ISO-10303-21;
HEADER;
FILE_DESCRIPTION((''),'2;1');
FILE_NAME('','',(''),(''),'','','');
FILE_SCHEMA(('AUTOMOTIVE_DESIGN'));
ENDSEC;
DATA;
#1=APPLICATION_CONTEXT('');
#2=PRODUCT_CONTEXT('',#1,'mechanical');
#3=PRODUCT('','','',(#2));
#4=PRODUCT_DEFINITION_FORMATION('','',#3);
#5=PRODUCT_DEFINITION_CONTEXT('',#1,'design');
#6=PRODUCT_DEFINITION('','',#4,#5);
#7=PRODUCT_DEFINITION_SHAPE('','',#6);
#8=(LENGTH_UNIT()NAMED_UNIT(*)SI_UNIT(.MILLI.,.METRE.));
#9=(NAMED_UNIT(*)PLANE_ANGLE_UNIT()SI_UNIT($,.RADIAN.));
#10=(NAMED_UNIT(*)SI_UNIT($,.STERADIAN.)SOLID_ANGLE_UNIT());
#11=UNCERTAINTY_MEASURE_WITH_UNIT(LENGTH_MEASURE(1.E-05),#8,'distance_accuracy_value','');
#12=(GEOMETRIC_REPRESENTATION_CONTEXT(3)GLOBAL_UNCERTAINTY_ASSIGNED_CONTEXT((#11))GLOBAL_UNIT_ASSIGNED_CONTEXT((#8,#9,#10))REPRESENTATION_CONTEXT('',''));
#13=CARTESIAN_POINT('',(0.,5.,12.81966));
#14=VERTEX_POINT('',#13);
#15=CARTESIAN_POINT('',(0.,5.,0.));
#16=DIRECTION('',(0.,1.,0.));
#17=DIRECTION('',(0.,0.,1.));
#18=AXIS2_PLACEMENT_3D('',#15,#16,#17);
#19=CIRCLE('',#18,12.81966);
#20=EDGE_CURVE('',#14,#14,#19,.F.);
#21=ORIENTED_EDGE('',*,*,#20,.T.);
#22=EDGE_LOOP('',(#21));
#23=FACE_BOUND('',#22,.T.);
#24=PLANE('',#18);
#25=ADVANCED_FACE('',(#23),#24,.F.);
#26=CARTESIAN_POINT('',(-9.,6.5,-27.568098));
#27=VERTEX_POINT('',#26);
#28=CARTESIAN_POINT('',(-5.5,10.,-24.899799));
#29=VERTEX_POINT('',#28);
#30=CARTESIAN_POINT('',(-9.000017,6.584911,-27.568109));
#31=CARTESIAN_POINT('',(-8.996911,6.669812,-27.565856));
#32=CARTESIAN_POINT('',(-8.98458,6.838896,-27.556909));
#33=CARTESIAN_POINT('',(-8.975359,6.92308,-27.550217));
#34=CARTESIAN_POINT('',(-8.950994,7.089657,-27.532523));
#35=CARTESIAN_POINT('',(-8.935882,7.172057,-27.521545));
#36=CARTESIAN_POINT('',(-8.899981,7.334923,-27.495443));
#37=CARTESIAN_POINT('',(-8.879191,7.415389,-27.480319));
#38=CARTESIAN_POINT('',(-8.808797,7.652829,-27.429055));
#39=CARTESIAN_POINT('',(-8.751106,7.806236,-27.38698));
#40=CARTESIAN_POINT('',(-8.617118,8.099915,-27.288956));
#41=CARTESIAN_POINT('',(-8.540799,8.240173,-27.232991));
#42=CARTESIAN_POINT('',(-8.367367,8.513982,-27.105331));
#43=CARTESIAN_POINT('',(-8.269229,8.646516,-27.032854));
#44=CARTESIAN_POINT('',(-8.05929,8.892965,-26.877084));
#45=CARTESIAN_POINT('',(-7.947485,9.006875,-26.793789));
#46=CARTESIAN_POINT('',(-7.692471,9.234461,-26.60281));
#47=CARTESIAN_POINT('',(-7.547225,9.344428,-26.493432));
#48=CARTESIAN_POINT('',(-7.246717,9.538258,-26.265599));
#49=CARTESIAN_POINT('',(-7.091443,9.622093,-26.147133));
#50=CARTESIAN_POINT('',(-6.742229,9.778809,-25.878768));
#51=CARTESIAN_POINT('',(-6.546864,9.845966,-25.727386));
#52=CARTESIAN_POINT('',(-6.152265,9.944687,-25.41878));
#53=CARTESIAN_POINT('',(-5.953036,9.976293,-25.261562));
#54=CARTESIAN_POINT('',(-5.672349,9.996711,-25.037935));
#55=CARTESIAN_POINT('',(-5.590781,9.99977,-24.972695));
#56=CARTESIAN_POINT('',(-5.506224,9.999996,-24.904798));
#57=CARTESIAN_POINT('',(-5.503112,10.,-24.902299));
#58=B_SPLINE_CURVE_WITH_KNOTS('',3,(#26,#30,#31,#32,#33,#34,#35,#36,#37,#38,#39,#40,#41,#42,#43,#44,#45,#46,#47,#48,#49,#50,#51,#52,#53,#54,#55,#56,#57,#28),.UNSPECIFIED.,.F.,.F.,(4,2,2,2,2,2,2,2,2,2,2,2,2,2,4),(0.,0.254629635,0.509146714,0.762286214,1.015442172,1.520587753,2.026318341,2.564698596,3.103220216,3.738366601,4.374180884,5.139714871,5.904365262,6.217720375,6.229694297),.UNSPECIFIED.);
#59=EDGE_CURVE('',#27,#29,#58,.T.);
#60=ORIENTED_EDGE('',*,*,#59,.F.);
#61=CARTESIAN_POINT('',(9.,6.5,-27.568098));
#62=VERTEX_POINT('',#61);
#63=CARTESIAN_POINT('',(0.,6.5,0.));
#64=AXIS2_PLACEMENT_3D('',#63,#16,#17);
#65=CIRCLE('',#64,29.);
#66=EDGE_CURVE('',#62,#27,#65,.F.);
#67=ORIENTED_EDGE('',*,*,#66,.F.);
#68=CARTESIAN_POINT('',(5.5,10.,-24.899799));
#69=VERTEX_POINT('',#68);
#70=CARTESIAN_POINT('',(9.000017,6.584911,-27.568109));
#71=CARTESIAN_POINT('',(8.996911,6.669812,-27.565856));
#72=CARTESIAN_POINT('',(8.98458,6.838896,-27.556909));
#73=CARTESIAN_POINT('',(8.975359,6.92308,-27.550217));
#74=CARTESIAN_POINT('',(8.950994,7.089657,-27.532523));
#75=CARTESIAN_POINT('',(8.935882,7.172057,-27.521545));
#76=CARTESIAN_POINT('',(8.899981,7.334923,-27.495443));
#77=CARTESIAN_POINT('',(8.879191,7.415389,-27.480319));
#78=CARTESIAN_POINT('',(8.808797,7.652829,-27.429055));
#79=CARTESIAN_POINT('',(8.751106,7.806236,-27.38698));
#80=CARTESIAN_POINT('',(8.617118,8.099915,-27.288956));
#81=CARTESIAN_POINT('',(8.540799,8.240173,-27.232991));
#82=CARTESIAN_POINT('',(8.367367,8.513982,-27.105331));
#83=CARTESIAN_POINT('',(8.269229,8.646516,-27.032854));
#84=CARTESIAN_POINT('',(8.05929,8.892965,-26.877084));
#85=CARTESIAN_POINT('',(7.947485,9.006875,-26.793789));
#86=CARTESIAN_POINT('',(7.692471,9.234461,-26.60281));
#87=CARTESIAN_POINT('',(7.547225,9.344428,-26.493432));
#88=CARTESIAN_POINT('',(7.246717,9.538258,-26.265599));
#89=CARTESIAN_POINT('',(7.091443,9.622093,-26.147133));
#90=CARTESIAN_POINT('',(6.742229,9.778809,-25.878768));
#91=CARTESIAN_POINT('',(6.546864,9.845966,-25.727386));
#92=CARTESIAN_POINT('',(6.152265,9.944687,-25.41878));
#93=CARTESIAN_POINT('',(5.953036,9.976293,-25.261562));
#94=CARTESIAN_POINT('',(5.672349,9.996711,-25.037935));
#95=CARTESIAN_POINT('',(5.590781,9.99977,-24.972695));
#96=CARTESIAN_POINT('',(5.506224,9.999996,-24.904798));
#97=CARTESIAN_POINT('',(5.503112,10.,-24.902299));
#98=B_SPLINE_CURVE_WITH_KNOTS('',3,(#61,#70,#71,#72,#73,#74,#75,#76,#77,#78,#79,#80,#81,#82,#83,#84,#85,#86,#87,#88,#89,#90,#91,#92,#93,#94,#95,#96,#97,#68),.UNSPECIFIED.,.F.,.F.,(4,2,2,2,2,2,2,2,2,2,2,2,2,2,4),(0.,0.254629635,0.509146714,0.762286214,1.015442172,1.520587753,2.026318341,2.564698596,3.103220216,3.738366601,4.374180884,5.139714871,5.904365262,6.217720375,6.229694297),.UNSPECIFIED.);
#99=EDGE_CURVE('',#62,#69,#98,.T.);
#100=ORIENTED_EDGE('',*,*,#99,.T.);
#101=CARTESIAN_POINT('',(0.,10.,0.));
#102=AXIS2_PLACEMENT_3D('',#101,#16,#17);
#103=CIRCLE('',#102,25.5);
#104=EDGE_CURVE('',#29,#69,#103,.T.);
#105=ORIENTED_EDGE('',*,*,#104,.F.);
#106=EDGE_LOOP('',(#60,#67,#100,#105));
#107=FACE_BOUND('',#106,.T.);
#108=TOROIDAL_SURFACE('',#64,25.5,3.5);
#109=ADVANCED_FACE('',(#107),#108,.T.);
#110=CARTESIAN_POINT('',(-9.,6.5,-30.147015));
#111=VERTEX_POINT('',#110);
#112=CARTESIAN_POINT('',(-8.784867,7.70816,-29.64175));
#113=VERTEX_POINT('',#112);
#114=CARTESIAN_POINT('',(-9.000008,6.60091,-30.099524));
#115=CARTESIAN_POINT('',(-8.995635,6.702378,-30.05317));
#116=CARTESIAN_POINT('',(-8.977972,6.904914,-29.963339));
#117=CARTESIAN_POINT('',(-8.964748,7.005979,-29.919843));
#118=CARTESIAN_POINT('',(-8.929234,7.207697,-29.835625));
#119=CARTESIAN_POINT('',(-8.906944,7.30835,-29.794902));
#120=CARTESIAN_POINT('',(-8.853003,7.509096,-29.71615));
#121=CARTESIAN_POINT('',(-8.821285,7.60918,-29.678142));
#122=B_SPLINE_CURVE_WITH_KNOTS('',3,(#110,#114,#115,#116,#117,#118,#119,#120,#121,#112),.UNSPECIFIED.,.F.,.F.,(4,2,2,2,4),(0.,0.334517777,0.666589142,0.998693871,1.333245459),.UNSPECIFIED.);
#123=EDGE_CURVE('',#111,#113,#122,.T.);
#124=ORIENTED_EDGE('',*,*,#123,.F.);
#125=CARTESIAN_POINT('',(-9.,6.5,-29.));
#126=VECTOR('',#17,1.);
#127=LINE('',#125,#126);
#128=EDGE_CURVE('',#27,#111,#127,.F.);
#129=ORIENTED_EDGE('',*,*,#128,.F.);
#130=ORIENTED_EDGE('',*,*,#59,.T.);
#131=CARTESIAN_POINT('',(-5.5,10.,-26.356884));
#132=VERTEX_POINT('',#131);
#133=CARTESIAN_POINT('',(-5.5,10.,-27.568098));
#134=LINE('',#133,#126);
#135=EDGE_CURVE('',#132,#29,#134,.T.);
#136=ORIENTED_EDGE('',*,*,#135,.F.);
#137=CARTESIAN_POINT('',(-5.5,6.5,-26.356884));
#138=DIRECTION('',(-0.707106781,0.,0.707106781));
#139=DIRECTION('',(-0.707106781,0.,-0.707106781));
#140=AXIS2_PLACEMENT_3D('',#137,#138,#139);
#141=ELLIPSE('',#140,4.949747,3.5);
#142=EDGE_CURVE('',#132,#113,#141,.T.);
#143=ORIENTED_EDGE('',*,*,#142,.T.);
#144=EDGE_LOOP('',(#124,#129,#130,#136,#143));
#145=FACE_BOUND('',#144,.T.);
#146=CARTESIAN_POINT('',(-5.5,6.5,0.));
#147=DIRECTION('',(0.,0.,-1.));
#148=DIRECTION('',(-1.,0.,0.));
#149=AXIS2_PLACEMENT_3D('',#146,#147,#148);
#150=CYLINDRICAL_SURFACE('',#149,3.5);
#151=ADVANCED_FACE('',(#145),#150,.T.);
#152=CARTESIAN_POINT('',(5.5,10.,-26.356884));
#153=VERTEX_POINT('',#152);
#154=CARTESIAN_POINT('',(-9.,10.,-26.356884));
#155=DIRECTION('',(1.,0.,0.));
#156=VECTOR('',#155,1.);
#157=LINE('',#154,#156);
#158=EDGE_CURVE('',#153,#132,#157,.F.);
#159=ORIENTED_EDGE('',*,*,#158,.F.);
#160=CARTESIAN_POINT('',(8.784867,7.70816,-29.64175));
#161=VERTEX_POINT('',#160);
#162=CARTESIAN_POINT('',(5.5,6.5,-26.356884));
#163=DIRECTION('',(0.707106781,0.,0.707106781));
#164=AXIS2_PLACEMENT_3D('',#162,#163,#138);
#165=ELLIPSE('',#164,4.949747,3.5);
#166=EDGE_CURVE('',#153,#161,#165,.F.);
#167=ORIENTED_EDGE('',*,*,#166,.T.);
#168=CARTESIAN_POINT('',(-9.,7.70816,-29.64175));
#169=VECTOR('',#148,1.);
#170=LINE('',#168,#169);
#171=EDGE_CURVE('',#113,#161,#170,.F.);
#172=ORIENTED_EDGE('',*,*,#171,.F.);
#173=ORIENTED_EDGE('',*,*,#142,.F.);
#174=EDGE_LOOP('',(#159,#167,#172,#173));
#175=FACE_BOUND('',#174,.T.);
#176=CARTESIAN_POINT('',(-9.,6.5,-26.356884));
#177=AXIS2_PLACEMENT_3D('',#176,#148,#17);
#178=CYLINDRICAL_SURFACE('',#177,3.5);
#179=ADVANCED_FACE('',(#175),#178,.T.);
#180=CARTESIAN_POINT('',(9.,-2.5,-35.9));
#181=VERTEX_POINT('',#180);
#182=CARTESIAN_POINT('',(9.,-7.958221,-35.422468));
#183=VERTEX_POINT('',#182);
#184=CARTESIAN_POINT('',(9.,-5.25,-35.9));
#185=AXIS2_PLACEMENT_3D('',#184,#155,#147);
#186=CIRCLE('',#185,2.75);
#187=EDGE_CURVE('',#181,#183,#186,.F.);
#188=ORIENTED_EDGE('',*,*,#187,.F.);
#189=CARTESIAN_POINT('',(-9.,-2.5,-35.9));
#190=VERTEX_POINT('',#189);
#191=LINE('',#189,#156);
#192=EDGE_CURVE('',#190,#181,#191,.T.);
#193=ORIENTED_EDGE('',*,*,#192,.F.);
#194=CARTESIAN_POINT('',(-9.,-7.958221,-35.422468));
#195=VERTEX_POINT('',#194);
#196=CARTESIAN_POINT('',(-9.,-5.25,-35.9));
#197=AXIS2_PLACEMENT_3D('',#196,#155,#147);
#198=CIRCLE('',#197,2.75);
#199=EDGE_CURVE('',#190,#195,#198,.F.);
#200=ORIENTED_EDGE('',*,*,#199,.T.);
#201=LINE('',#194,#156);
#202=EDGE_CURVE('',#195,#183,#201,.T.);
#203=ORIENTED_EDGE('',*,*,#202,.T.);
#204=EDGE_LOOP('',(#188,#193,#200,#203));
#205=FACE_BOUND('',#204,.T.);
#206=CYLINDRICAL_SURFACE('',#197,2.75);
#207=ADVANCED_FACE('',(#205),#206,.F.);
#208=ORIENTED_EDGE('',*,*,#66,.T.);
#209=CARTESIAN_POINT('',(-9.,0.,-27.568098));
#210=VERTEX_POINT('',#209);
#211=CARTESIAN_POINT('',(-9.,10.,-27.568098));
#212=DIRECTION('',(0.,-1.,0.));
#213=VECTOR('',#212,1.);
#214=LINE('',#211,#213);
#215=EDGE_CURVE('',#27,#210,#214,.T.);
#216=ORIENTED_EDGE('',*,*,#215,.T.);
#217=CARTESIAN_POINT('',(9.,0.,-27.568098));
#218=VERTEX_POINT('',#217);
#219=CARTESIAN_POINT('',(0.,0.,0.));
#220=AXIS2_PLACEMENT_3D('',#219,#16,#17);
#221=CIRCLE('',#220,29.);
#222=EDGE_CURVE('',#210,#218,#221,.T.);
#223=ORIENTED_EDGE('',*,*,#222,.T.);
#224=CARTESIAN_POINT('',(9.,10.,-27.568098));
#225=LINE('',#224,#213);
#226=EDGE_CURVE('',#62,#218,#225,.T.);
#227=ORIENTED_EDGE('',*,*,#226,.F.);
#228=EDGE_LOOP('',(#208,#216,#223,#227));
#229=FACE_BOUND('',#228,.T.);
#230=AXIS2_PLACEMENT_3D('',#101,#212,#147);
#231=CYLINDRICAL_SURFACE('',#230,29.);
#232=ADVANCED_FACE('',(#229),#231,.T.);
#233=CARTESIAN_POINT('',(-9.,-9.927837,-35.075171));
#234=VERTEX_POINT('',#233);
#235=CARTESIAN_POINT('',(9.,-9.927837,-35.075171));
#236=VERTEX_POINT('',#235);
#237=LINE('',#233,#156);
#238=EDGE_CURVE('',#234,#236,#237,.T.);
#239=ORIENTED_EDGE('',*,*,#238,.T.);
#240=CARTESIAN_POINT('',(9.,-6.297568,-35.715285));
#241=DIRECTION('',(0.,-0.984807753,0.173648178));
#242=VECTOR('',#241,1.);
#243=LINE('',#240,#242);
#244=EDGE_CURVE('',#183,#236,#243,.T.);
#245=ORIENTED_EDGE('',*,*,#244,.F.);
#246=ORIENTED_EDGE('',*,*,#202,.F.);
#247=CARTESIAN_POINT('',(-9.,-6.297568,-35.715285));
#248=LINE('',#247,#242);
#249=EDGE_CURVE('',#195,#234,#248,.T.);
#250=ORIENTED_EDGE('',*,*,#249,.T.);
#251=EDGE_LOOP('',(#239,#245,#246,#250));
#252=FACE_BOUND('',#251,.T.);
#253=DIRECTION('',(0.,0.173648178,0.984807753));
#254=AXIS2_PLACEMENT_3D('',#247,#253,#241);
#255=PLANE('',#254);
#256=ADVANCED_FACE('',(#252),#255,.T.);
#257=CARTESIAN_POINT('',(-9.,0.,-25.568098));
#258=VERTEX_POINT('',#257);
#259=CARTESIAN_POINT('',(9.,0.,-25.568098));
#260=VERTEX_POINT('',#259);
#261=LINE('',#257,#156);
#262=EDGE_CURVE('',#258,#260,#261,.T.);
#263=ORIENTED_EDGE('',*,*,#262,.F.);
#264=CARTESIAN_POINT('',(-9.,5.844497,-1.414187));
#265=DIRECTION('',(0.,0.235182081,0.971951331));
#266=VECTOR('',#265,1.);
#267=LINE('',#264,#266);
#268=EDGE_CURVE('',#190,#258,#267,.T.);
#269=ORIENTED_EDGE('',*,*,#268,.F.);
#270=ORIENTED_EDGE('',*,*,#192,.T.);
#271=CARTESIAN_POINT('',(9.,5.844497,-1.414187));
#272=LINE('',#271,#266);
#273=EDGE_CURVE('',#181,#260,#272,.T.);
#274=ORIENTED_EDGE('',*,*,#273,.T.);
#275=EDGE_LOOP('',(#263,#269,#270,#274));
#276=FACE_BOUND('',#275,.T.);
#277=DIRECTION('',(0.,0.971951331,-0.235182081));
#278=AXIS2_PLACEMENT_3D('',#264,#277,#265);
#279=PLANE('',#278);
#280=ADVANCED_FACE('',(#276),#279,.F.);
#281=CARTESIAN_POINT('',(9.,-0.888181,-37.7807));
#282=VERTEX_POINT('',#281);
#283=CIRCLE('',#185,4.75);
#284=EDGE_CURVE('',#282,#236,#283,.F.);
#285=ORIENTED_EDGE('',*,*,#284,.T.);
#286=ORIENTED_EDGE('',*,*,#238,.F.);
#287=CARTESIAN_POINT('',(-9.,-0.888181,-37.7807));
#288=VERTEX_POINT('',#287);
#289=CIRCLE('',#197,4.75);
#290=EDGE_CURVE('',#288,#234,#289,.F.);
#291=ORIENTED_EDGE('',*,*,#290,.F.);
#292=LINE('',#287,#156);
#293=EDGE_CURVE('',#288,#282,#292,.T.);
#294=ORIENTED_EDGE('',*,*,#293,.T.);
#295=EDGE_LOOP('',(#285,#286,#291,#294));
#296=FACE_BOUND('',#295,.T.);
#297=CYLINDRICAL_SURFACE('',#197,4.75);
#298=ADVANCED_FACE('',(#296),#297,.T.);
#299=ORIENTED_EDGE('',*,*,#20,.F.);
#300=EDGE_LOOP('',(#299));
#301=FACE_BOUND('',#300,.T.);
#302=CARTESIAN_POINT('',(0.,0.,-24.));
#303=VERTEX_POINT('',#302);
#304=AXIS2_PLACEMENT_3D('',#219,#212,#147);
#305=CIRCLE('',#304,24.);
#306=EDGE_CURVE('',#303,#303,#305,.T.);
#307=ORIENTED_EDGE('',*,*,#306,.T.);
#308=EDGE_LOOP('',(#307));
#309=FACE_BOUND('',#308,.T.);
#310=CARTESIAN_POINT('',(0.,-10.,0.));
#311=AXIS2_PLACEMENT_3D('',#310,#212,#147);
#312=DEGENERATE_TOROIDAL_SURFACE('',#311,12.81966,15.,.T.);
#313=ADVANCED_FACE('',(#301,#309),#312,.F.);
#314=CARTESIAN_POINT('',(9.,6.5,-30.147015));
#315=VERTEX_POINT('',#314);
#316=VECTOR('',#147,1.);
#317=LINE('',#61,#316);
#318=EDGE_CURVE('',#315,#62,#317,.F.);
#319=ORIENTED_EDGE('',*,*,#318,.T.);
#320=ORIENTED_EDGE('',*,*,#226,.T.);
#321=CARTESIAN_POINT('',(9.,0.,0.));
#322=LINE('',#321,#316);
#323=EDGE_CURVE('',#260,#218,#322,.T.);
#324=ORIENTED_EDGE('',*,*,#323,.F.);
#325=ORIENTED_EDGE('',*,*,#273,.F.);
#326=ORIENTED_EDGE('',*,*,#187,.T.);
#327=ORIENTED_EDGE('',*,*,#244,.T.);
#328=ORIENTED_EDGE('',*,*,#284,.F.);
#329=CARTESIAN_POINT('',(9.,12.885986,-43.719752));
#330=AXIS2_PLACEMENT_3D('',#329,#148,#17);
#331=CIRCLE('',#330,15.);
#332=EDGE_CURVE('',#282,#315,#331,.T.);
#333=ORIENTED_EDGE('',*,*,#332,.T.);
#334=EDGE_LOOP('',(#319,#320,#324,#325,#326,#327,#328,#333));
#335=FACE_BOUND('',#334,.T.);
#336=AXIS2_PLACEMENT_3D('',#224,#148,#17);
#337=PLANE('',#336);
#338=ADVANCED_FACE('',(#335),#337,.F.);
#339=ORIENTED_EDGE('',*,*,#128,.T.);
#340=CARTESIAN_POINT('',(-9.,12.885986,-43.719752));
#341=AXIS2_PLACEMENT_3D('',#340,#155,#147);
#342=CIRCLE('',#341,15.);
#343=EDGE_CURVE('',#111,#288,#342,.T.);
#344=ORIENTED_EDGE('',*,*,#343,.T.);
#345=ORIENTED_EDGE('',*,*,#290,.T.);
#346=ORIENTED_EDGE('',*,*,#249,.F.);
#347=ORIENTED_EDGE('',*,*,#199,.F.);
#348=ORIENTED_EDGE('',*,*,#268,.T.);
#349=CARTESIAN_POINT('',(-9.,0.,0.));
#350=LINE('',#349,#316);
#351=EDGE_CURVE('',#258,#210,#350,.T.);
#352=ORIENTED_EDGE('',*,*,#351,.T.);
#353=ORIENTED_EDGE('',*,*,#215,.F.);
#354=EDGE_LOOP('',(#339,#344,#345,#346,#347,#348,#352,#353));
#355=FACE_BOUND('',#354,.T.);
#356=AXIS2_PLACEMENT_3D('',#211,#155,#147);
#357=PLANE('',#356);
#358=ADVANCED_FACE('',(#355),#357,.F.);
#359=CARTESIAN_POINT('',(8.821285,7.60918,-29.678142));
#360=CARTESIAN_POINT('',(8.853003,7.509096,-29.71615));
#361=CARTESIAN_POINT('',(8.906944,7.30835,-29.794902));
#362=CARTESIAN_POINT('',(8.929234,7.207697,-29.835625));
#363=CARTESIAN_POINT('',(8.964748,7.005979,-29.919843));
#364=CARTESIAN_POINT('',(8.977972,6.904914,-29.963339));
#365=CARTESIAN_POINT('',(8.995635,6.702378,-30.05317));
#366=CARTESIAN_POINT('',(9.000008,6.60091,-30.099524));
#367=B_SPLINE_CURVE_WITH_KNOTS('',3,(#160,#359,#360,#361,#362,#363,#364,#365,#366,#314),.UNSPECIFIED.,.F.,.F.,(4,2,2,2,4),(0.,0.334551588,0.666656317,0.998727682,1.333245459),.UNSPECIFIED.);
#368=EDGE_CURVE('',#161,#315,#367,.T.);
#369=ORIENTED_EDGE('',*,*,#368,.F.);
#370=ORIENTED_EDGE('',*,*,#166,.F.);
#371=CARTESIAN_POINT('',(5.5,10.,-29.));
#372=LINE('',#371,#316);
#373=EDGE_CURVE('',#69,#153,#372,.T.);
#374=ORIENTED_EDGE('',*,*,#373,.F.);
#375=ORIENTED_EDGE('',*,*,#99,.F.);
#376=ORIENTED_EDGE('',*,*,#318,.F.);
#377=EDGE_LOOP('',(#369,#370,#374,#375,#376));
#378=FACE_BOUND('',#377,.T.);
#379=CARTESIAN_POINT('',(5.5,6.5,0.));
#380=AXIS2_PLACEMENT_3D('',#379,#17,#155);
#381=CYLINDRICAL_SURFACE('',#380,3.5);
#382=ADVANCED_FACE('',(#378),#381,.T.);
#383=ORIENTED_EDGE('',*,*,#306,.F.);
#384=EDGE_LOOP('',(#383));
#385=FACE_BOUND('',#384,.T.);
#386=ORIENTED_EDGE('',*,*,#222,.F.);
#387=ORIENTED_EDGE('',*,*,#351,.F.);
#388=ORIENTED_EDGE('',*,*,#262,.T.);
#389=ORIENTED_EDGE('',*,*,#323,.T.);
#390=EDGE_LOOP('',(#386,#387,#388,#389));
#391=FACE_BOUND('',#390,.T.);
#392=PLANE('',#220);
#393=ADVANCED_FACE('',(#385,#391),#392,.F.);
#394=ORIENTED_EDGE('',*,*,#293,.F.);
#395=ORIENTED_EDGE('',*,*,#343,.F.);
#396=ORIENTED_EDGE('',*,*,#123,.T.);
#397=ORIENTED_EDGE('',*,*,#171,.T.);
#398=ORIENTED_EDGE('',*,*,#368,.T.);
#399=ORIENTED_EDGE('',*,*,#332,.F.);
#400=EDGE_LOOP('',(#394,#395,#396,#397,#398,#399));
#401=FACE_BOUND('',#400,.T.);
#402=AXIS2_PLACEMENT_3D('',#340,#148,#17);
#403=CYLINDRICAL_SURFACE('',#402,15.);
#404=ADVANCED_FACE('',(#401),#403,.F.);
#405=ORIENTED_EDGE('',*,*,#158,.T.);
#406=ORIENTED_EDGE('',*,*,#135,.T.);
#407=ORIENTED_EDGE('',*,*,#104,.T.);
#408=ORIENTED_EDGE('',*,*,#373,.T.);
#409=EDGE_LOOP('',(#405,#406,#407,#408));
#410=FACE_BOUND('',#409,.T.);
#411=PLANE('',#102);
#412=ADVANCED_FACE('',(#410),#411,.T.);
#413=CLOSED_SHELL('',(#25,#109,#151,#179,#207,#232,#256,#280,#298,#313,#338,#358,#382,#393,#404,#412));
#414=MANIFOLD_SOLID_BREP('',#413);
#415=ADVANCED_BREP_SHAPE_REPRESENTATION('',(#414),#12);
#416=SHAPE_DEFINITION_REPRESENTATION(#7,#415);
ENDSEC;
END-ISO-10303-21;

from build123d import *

# Parameters (mm, degrees)
BOSS_EXTRUDE1_DEPTH = 10
BOSS_EXTRUDE2_DEPTH = 18
FILLET3_R           = 15
FILLET4_R           = 3.5
SKETCH13_R          = 24
CUT_EXTRUDE1_DEPTH  = 5
FILLET6_R           = 15


with BuildPart() as part:
    # Sketch1 → Boss-Extrude1 (new body)
    with BuildSketch(Plane(origin=(0, 0, 0), x_dir=(1, 0, 0), z_dir=(0, 1, 0))):
        with BuildLine():
            Line((-9, 27.568097504), (-9, 29))
            Line((-9, 29), (9, 29))
            Line((9, 29), (9, 27.568097504))
            ThreePointArc((9, 27.568097504), (0, -29), (-9, 27.568097504))
        make_face()
    extrude(amount=BOSS_EXTRUDE1_DEPTH)

    # Sketch2 → Boss-Extrude2 (add)
    with BuildSketch(Plane(origin=(9, 0, 0), x_dir=(0, 0, -1), z_dir=(1, 0, 0))):
        with BuildLine():
            ThreePointArc((35.9, -2.5), (38.63953542, -5.489678293), (35.422467511, -7.958221321))
            Line((35.422467511, -7.958221321), (35.075171156, -9.927836827))
            ThreePointArc((35.075171156, -9.927836827), (40.631924816, -5.663989778), (35.9, -0.5))
            Line((35.9, -0.5), (29, -0.5))
            Line((29, -0.5), (29, 0))
            Line((29, 0), (27.568097504, 0))
            Line((27.568097504, 0), (25.568097504, 0))
            Line((25.568097504, 0), (35.9, -2.5))
        make_face()
    extrude(amount=-BOSS_EXTRUDE2_DEPTH)

    # Fillet3
    # the kernel refuses this fillet: 15 mm, written as the material it adds along each edge
    with BuildSketch(Plane(origin=(9, -0.5, -29), x_dir=(0, -0.04416525302112601, -0.9990242391581797), z_dir=(-1, 0, 0))) as fillet3_piece_1_section:
        with BuildLine():
            CenterArc((14.114193119, -14.023025969), FILLET3_R, 110.793105877, 55.582764188)
            Line((-0.463735157, -10.489754511), (-1.921527984, -10.136427365))
            ThreePointArc((-1.921527984, -10.136427365), (-1.730403937, -5.178629376), (-1.498536359, 0.06624788))
            Line((-1.498536359, 0.06624788), (0.06624788, 1.498536359))
            ThreePointArc((0.06624788, 1.498536359), (6.95951513, 1.193796113), (8.256784252, 1.402302597))
            Line((8.256784252, 1.402302597), (8.789275967, 0))
        make_face()
    fillet3_piece_1 = extrude(amount=18, mode=Mode.PRIVATE)
    fillet3_piece_1 = split(fillet3_piece_1, bisect_by=Plane(origin=(0, -2.614058352, -36.371375907), z_dir=(0, 0.9719513305344294, -0.23518208067867855)), keep=Keep.TOP, mode=Mode.PRIVATE)
    add(fillet3_piece_1)

    # Fillet4
    fillet4_edges = [part.edges().sort_by_distance(p)[0] for p in [
        (0, 10, -29),
        (-9, 10, -28.284048752),
        (0, 10, 29),
        (9, 10, -28.284048752),
    ]]
    fillet(fillet4_edges, radius=FILLET4_R)

    # Sketch13 → Cut-Extrude1 (cut)
    with BuildSketch(Plane.XZ):
        with Locations(Location((0, 0, 0), (0, 0, 270))):
            Circle(SKETCH13_R)
    extrude(amount=-CUT_EXTRUDE1_DEPTH, mode=Mode.SUBTRACT)

    # Fillet6
    # the kernel refuses this fillet: 15 mm, written as the material it adds along each edge
    with BuildSketch(Plane(origin=(0, 5, 0), x_dir=(0, 0, -1), z_dir=(-1, 0, 0))) as fillet6_piece_1:
        with BuildLine():
            CenterArc((12.819660113, 15), FILLET6_R, 270, 48.189685104)
            Line((12.819660113, 0), (12.819660113, -0.3))
            Line((12.819660113, -0.3), (24, -0.3))
            Line((24, -0.3), (24.3, 0))
            ThreePointArc((24.3, 0), (24.3, 2.5), (24.223606798, 4.8))
            Line((24.223606798, 4.8), (24, 5))
        make_face()
    revolve(axis=Axis((0, 5, 0), (0, -1, 0)))


solid = part.part
